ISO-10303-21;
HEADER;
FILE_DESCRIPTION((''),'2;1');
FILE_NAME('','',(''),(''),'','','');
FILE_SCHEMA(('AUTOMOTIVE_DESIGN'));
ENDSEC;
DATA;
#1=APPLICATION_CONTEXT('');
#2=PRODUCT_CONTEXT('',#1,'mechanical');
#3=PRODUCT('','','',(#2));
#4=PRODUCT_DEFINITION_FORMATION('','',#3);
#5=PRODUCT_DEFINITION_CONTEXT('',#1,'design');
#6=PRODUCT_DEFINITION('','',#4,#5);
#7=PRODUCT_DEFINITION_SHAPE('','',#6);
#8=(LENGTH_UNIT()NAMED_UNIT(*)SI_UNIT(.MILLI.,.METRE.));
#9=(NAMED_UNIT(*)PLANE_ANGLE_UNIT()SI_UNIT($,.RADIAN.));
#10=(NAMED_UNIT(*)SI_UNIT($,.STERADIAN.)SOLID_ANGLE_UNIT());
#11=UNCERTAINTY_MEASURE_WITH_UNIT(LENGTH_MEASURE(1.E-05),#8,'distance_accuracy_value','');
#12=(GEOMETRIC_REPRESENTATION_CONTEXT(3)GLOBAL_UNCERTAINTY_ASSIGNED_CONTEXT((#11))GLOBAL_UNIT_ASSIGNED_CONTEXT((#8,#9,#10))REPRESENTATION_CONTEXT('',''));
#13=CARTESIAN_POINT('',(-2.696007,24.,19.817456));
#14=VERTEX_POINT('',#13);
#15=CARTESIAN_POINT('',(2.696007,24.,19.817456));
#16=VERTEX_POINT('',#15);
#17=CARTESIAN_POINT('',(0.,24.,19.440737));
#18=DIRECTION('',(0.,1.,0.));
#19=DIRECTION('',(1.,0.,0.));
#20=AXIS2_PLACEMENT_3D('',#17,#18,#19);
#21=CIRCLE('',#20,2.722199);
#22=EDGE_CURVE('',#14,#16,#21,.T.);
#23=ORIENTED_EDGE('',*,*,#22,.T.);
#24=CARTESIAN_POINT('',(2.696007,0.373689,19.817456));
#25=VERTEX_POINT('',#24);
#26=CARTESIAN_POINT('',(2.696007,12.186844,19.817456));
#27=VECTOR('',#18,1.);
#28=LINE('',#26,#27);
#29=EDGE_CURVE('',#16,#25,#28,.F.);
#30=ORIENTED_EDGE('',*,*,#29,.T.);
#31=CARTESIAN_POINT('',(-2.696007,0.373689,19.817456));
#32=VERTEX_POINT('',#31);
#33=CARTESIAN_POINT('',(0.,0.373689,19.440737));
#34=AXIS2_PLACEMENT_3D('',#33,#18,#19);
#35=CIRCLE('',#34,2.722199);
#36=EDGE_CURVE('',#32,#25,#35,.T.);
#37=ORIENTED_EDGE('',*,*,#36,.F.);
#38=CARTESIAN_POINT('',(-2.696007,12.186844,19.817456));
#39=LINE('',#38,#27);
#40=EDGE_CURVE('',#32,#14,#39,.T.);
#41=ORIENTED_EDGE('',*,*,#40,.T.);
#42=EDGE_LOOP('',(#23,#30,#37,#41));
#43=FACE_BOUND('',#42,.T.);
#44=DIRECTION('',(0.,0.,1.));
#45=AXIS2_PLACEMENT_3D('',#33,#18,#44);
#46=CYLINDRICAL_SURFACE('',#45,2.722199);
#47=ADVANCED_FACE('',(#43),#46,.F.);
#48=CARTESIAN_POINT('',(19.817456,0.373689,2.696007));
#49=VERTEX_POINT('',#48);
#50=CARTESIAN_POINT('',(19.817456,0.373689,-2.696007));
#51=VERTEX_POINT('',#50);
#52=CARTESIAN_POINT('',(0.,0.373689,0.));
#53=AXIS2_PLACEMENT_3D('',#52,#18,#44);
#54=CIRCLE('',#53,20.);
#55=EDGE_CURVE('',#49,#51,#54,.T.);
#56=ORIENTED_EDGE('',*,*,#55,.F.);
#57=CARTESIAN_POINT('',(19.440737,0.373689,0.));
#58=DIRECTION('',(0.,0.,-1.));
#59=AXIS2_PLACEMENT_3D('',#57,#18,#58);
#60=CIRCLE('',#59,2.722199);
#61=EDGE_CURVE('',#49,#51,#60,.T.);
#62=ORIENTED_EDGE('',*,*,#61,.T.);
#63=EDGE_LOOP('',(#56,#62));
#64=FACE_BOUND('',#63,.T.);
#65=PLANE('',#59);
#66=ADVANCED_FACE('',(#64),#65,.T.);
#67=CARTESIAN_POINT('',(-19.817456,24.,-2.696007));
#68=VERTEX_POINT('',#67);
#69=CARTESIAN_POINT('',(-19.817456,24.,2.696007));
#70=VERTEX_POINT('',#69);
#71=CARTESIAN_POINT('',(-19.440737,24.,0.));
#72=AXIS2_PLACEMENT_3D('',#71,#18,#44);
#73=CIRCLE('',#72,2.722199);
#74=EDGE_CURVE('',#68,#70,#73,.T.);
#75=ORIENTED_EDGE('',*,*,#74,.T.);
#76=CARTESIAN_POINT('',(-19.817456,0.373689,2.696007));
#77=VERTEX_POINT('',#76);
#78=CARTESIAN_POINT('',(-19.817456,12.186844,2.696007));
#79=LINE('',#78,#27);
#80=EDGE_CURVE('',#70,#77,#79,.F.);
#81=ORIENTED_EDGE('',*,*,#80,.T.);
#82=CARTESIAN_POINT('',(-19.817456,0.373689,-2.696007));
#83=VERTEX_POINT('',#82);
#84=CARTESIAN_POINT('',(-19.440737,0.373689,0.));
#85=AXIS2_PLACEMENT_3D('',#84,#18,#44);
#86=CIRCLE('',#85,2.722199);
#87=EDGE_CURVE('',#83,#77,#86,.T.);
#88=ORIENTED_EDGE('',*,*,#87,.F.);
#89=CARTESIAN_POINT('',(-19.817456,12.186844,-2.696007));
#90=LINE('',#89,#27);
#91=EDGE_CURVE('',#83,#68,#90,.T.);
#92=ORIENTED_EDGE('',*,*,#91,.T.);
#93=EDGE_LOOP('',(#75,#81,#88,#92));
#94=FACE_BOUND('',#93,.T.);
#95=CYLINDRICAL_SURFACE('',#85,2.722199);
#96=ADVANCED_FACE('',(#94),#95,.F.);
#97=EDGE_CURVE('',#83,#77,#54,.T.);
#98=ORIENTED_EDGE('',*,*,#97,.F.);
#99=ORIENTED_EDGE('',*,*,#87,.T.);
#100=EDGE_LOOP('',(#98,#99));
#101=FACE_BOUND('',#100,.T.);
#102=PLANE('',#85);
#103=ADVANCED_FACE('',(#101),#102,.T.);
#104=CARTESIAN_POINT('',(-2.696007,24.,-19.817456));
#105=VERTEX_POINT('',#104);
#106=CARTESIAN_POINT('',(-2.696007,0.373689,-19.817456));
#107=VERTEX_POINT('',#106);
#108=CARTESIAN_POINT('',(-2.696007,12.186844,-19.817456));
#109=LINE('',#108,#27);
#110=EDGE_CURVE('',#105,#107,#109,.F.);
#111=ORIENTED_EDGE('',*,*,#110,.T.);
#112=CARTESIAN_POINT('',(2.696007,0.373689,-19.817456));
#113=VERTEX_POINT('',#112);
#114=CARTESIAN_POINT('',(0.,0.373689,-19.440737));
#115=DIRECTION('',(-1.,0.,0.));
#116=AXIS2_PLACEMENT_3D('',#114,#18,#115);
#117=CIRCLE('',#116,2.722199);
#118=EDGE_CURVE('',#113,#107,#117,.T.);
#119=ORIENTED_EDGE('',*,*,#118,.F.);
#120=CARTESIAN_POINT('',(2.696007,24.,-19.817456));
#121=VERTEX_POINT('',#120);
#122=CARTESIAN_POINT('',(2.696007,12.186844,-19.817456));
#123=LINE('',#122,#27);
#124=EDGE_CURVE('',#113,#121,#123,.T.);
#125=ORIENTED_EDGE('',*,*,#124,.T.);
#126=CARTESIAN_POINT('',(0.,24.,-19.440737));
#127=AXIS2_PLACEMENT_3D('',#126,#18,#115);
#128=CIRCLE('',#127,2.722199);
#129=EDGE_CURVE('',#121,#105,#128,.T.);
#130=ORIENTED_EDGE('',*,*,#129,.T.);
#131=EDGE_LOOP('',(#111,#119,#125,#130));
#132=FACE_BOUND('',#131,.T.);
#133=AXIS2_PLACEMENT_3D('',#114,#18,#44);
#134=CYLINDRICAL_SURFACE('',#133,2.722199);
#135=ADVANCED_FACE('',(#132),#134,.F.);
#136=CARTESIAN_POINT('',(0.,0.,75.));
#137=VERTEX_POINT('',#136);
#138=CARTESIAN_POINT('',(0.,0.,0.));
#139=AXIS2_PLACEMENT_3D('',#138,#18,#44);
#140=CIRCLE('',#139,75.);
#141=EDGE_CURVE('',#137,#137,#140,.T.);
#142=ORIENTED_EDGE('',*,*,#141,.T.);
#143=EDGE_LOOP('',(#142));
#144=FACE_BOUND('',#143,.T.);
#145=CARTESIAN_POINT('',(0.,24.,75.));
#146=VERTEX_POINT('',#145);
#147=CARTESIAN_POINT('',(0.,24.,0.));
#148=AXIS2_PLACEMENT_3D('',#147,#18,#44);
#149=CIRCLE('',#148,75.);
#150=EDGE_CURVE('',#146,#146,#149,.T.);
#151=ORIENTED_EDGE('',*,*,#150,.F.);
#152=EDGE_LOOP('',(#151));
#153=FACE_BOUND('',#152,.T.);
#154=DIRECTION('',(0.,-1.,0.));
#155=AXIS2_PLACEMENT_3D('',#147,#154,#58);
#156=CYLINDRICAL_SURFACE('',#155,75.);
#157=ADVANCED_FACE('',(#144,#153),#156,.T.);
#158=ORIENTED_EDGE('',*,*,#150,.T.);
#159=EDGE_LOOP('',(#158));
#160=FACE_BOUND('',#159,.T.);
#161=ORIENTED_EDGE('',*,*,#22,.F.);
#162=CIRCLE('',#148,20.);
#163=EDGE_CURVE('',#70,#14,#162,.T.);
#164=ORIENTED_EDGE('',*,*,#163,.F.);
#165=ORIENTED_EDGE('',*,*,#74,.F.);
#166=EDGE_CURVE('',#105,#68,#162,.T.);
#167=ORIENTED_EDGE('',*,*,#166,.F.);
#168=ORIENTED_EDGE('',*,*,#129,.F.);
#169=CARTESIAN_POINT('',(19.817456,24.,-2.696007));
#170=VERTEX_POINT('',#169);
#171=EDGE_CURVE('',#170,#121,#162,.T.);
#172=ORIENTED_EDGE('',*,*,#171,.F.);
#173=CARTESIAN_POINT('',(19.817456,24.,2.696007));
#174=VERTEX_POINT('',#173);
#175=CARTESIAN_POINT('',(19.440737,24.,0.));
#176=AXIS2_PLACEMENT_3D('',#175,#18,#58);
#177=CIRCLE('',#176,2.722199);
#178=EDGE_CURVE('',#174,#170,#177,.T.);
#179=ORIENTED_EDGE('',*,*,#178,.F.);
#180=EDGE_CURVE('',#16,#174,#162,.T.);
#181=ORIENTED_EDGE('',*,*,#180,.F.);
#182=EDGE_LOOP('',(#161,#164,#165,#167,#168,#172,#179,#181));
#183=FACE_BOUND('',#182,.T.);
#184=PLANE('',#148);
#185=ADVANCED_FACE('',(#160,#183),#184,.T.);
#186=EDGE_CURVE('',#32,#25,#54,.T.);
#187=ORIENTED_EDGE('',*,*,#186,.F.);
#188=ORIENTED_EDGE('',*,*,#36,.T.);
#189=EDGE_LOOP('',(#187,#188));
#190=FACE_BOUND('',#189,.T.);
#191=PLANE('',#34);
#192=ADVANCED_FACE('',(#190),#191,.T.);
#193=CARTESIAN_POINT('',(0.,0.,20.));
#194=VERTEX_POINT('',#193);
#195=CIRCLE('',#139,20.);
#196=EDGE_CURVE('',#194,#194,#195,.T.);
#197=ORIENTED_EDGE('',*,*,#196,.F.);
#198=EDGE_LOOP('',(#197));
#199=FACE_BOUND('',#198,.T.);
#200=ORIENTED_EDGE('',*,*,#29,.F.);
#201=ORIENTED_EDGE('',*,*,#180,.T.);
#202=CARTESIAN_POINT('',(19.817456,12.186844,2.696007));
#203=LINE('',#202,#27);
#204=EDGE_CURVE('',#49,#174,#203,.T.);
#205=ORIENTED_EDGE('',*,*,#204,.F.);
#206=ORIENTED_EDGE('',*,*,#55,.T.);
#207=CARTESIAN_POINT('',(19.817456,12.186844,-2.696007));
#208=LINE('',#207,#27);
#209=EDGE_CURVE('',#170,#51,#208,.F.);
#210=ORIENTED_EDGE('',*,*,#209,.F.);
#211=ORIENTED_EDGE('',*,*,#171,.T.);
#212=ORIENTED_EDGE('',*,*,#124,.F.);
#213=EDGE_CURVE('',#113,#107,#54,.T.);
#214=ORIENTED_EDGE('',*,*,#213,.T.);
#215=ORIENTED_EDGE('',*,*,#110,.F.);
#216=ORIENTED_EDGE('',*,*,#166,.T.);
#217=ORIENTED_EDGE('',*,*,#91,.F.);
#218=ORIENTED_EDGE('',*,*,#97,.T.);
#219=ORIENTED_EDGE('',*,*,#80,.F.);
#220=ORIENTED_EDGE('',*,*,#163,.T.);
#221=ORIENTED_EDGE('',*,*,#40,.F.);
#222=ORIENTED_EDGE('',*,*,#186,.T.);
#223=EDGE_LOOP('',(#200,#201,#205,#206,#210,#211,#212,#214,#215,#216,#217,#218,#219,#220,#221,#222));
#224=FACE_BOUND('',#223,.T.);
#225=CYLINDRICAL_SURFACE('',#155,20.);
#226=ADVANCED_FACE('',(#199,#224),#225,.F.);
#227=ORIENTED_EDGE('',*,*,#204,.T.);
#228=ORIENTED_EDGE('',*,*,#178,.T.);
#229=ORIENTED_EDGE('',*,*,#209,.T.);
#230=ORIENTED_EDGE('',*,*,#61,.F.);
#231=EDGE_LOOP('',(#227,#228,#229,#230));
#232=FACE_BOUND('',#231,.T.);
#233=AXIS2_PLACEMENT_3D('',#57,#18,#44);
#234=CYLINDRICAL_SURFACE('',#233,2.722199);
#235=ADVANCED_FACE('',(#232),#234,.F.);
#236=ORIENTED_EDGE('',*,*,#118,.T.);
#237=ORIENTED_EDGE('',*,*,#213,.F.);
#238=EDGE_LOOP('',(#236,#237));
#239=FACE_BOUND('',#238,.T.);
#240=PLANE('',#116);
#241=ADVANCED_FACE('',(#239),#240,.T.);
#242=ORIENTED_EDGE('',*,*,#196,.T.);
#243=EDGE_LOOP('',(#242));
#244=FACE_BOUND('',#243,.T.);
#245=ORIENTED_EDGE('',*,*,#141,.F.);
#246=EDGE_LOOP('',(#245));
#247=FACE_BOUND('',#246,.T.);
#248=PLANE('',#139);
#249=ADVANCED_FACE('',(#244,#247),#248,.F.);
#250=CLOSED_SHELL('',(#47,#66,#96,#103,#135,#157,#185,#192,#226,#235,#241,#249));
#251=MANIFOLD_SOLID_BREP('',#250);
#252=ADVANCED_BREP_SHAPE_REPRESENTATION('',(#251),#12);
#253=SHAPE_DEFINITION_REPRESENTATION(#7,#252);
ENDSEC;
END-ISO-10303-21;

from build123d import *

# Parameters (mm, degrees)
SKETCH1_R           = 75
BOSS_EXTRUDE1_DEPTH = 24
SKETCH2_R           = 20
CUT_EXTRUDE1_DEPTH  = 109.747413762
SKETCH3_R           = 2.722199405
CUT_EXTRUDE2_DEPTH  = 23.626311199
CIRPATTERN1_COUNT   = 4


with BuildPart() as part:
    # Sketch1 → Boss-Extrude1 (new body)
    with BuildSketch(Plane(origin=(0, 0, 0), x_dir=(1, 0, 0), z_dir=(0, 1, 0))):
        Circle(SKETCH1_R)
    extrude(amount=BOSS_EXTRUDE1_DEPTH)

    # Sketch2 → Cut-Extrude1 (cut, through all)
    with BuildSketch(Plane(origin=(0, 0, 0), x_dir=(1, 0, 0), z_dir=(0, 1, 0))):
        Circle(SKETCH2_R)
    extrude(amount=CUT_EXTRUDE1_DEPTH, mode=Mode.SUBTRACT)

    # Sketch3 → Cut-Extrude2 (cut)
    with BuildSketch(Plane(origin=(0, 24, 0), x_dir=(1, 0, 0), z_dir=(0, 1, 0))):
        with Locations((-19.440736976, 0)):
            Circle(SKETCH3_R)
    cut_extrude2 = extrude(amount=-CUT_EXTRUDE2_DEPTH, mode=Mode.SUBTRACT)

    # CirPattern1: Cut-Extrude2 ×4 about axis
    cirpattern1_axis = Axis((0, 0, 0), (0, 1, 0))
    for i in range(1, CIRPATTERN1_COUNT):
        add(cut_extrude2.rotate(cirpattern1_axis, i * 360 / CIRPATTERN1_COUNT), mode=Mode.SUBTRACT)


solid = part.part
